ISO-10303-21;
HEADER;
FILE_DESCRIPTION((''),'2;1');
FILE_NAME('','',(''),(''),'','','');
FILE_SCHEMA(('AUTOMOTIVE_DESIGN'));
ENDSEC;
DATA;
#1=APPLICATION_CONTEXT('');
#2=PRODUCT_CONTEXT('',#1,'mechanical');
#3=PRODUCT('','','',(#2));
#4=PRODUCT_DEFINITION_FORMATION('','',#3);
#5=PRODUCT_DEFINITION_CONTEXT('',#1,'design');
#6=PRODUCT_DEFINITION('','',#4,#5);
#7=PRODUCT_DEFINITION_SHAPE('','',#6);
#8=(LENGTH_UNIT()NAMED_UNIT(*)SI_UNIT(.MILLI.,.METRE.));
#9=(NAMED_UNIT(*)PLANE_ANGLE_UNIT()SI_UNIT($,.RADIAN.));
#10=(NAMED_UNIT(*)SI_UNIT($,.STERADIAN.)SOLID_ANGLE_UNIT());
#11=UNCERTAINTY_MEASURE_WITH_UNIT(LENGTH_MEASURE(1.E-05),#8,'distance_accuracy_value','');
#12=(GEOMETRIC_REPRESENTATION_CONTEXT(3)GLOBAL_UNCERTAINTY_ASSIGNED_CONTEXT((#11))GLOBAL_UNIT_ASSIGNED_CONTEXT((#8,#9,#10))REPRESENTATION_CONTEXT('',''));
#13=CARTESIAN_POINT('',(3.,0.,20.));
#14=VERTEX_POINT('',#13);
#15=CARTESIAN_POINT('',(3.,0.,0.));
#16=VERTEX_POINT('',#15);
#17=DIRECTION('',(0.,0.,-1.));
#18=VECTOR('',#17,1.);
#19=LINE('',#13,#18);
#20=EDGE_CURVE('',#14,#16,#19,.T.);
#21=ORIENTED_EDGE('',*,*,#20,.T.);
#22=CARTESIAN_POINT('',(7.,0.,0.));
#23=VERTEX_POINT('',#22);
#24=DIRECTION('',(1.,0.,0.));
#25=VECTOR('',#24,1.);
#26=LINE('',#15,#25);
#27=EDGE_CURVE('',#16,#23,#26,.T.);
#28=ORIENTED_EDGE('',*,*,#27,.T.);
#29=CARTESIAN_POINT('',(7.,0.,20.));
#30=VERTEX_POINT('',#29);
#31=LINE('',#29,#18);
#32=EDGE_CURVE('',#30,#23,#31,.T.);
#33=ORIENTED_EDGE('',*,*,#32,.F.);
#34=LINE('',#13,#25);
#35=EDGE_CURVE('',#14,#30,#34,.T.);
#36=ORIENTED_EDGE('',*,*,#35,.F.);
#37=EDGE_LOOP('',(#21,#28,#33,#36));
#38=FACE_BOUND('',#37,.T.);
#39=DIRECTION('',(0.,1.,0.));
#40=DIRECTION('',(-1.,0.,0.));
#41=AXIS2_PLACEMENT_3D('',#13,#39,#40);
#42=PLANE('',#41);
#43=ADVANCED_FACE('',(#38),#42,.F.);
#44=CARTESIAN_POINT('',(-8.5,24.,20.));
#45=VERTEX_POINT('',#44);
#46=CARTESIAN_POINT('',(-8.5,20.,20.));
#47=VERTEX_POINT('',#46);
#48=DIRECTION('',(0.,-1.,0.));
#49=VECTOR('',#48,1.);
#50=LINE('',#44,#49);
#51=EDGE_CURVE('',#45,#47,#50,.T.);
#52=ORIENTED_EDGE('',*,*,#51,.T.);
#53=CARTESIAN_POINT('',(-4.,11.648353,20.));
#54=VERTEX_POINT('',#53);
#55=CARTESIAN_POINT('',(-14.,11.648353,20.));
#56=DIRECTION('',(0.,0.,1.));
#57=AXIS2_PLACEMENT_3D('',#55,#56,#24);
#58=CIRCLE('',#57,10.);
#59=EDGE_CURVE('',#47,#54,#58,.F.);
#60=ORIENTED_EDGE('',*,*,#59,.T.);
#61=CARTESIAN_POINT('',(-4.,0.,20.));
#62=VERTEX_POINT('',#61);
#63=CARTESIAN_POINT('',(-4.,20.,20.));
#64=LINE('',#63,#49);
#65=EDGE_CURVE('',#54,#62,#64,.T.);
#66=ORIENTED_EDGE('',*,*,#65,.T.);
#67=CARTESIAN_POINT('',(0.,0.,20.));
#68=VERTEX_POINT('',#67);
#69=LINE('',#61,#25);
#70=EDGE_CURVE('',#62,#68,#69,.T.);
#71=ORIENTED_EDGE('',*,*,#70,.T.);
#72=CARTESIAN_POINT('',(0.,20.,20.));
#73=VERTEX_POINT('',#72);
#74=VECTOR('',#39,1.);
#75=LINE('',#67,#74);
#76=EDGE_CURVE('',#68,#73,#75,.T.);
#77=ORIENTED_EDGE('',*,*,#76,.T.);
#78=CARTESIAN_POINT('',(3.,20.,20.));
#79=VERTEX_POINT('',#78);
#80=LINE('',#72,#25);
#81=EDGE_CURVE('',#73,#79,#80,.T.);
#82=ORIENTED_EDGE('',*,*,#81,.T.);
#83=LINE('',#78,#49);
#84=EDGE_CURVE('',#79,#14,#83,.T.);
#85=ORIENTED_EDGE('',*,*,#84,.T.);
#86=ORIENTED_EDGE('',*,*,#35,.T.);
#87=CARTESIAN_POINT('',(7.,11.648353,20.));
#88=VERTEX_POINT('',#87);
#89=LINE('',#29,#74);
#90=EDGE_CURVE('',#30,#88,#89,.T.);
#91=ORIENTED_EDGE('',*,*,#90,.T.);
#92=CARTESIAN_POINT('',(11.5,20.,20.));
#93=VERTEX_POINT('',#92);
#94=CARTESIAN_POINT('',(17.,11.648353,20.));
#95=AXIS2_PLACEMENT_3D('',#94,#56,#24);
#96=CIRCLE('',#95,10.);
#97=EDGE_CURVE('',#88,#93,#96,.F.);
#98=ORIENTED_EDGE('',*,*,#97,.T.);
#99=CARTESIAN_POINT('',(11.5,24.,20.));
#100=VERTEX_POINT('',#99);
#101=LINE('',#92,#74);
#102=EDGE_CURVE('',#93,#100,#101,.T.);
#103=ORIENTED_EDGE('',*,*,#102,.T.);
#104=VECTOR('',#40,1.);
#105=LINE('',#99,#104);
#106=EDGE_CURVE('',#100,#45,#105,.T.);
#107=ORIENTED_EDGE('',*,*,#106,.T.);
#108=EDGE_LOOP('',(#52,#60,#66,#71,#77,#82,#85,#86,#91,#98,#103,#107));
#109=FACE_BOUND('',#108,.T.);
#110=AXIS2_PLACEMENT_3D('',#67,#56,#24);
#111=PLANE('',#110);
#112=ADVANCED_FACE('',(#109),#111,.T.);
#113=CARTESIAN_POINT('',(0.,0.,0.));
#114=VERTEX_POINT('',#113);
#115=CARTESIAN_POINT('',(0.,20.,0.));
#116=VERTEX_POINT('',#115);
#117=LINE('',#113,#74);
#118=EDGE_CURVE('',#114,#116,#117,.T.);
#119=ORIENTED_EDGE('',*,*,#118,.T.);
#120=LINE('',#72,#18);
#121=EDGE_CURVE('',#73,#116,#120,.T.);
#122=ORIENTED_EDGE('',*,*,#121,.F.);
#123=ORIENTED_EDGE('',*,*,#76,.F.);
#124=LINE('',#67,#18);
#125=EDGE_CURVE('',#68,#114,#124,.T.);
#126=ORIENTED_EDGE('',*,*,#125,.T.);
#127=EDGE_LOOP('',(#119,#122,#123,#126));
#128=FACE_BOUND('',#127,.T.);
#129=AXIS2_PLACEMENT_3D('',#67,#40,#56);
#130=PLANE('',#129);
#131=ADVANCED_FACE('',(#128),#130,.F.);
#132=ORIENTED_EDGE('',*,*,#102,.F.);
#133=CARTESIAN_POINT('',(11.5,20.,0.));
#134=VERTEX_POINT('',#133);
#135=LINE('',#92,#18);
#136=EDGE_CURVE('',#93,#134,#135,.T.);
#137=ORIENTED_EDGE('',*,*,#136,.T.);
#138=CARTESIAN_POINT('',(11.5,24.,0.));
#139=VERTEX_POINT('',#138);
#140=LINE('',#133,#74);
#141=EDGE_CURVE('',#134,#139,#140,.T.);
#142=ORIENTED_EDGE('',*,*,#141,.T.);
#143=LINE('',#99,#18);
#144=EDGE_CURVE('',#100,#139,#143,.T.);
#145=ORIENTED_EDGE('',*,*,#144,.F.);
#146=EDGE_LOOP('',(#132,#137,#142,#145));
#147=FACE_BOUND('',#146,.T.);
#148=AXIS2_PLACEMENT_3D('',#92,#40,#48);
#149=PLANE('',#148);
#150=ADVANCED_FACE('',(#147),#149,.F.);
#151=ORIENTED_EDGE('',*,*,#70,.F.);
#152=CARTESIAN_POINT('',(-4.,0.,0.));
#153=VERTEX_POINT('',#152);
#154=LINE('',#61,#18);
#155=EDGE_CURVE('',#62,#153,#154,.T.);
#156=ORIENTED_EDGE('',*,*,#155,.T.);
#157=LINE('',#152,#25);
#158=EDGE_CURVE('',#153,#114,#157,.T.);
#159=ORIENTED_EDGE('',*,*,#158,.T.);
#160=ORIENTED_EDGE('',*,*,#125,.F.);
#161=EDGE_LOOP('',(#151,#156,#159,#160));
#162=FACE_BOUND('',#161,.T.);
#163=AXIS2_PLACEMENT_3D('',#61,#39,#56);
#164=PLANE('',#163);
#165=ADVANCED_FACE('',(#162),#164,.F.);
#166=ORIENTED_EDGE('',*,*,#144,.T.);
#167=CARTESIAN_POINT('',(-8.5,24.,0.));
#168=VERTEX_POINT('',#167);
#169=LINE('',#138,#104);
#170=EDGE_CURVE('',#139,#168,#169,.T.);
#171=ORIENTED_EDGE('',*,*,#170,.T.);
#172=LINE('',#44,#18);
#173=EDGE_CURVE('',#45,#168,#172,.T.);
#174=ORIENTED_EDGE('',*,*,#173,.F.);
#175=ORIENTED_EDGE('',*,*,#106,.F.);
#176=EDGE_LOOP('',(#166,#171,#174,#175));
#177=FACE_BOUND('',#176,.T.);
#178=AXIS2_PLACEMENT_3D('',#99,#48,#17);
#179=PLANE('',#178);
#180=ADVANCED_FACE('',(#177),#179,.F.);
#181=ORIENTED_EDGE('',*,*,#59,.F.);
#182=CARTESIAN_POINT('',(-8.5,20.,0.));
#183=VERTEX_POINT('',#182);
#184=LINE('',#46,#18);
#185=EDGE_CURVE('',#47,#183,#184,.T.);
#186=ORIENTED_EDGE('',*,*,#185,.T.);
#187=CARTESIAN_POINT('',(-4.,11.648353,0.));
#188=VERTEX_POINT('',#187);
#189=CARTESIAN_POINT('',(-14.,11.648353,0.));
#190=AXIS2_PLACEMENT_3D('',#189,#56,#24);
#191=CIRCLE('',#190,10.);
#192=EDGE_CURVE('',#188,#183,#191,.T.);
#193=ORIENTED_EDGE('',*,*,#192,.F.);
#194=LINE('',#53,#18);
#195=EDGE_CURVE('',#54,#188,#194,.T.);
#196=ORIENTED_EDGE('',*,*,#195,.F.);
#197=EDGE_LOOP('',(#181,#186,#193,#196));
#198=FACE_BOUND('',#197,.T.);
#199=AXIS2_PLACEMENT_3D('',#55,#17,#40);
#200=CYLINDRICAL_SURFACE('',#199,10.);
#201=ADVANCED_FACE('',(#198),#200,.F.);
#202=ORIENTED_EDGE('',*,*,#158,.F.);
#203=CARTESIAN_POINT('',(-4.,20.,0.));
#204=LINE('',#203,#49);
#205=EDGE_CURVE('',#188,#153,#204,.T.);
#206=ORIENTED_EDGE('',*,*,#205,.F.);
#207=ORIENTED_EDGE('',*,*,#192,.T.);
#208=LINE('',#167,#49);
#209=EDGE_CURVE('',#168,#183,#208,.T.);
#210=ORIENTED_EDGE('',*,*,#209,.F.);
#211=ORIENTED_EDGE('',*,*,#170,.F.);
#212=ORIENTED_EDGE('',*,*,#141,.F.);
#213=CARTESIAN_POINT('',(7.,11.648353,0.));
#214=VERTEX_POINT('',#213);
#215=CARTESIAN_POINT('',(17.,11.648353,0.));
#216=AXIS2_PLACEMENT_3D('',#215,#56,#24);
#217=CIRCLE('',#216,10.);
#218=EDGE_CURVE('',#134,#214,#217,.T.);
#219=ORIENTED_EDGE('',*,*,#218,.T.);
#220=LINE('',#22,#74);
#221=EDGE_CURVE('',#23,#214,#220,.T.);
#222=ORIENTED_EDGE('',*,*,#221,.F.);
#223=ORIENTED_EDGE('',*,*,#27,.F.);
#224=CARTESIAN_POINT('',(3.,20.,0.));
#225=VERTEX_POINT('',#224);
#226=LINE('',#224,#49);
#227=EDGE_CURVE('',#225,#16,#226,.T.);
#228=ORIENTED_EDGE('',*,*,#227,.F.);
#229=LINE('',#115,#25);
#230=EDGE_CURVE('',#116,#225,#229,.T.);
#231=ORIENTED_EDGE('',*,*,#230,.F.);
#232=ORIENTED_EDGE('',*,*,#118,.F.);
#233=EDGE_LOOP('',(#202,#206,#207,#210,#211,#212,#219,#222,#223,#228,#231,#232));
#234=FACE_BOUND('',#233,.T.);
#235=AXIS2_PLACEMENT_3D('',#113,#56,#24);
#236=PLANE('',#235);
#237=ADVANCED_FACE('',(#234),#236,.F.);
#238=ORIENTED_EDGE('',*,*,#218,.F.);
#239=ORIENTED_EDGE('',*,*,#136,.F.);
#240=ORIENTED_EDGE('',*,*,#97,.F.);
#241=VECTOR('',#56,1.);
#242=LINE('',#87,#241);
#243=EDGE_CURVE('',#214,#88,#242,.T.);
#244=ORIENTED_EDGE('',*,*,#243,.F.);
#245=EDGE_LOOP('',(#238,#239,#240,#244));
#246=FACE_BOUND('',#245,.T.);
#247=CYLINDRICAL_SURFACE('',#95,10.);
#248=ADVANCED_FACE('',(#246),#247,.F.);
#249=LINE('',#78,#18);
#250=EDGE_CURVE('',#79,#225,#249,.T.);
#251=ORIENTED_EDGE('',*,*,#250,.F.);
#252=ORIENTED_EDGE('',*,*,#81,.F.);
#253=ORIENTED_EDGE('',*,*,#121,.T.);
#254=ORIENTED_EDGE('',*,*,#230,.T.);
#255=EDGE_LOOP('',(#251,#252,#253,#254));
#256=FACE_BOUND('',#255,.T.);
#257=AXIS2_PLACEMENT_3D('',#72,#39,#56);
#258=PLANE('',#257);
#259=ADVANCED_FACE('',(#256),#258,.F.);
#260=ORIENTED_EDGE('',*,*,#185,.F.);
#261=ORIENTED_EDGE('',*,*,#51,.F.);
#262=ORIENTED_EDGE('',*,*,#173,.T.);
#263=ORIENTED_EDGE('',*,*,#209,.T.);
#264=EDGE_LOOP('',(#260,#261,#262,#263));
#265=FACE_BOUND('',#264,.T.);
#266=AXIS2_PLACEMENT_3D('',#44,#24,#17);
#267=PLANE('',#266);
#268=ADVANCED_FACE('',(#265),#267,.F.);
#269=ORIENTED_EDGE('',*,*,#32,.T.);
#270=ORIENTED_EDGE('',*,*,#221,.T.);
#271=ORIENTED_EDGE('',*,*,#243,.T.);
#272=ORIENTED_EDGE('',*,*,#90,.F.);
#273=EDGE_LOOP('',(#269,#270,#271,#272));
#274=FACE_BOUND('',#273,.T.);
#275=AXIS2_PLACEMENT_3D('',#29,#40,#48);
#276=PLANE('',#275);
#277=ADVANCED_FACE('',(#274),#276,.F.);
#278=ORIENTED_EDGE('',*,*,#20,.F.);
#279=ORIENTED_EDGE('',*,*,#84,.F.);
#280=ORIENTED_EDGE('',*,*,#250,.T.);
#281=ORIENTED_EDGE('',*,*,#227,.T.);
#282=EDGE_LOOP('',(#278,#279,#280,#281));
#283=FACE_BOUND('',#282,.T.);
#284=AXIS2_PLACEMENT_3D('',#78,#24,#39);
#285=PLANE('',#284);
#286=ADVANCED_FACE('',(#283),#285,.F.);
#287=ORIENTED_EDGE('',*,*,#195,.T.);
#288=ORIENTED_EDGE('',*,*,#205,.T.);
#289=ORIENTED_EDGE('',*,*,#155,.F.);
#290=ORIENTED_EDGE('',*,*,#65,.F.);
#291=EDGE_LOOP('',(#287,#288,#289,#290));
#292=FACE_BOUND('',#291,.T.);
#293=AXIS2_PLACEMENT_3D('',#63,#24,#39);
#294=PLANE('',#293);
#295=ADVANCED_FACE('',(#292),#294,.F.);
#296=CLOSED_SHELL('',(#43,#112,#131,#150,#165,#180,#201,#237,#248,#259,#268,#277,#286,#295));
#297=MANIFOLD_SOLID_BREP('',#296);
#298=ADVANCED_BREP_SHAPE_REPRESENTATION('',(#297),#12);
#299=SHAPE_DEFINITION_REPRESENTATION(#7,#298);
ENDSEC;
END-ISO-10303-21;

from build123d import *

# Parameters (mm, degrees)
BOSS_EXTRUDE1_DEPTH = 20
FILLET1_R           = 10


with BuildPart() as part:
    # Sketch1 → Boss-Extrude1 (new body)
    with BuildSketch(Plane.XY):
        Polygon((0, 0), (0, 20), (3, 20), (3, 0), (7, 0), (7, 20), (11.5, 20), (11.5, 24), (-8.5, 24), (-8.5, 20), (-4, 20), (-4, 0), align=None)
    extrude(amount=BOSS_EXTRUDE1_DEPTH)

    # Fillet1
    # the kernel refuses this fillet: 10 mm, written as the material it adds along each edge
    with BuildSketch(Plane(origin=(-4, 20, 0), x_dir=(-1.0, -1.533193325383024e-12, 0), z_dir=(0, 0, 1))) as fillet1_piece_1:
        with BuildLine():
            CenterArc((10, 8.351646544), FILLET1_R, 180, 56.632987031)
            Line((0, 8.351646544), (-0.2, 8.351646544))
            Line((-0.2, 8.351646544), (-0.2, 0))
            Line((-0.2, 0), (0, -0.2))
            ThreePointArc((0, -0.2), (2.25, -0.2), (4.39, -0.167032931))
            Line((4.39, -0.167032931), (4.5, 0))
        make_face()
    extrude(amount=20)
    with BuildSketch(Plane(origin=(7, 20, 0), x_dir=(0, -1, 0), z_dir=(0, 0, 1))) as fillet1_piece_2:
        with BuildLine():
            CenterArc((8.351646544, 10), FILLET1_R, 213.367012969, 56.632987031)
            Line((0, 4.5), (-0.167032931, 4.39))
            ThreePointArc((-0.167032931, 4.39), (-0.2, 2.25), (-0.2, 0))
            Line((-0.2, 0), (0, -0.2))
            Line((0, -0.2), (8.351646544, -0.2))
            Line((8.351646544, -0.2), (8.351646544, 0))
        make_face()
    extrude(amount=20)


solid = part.part
